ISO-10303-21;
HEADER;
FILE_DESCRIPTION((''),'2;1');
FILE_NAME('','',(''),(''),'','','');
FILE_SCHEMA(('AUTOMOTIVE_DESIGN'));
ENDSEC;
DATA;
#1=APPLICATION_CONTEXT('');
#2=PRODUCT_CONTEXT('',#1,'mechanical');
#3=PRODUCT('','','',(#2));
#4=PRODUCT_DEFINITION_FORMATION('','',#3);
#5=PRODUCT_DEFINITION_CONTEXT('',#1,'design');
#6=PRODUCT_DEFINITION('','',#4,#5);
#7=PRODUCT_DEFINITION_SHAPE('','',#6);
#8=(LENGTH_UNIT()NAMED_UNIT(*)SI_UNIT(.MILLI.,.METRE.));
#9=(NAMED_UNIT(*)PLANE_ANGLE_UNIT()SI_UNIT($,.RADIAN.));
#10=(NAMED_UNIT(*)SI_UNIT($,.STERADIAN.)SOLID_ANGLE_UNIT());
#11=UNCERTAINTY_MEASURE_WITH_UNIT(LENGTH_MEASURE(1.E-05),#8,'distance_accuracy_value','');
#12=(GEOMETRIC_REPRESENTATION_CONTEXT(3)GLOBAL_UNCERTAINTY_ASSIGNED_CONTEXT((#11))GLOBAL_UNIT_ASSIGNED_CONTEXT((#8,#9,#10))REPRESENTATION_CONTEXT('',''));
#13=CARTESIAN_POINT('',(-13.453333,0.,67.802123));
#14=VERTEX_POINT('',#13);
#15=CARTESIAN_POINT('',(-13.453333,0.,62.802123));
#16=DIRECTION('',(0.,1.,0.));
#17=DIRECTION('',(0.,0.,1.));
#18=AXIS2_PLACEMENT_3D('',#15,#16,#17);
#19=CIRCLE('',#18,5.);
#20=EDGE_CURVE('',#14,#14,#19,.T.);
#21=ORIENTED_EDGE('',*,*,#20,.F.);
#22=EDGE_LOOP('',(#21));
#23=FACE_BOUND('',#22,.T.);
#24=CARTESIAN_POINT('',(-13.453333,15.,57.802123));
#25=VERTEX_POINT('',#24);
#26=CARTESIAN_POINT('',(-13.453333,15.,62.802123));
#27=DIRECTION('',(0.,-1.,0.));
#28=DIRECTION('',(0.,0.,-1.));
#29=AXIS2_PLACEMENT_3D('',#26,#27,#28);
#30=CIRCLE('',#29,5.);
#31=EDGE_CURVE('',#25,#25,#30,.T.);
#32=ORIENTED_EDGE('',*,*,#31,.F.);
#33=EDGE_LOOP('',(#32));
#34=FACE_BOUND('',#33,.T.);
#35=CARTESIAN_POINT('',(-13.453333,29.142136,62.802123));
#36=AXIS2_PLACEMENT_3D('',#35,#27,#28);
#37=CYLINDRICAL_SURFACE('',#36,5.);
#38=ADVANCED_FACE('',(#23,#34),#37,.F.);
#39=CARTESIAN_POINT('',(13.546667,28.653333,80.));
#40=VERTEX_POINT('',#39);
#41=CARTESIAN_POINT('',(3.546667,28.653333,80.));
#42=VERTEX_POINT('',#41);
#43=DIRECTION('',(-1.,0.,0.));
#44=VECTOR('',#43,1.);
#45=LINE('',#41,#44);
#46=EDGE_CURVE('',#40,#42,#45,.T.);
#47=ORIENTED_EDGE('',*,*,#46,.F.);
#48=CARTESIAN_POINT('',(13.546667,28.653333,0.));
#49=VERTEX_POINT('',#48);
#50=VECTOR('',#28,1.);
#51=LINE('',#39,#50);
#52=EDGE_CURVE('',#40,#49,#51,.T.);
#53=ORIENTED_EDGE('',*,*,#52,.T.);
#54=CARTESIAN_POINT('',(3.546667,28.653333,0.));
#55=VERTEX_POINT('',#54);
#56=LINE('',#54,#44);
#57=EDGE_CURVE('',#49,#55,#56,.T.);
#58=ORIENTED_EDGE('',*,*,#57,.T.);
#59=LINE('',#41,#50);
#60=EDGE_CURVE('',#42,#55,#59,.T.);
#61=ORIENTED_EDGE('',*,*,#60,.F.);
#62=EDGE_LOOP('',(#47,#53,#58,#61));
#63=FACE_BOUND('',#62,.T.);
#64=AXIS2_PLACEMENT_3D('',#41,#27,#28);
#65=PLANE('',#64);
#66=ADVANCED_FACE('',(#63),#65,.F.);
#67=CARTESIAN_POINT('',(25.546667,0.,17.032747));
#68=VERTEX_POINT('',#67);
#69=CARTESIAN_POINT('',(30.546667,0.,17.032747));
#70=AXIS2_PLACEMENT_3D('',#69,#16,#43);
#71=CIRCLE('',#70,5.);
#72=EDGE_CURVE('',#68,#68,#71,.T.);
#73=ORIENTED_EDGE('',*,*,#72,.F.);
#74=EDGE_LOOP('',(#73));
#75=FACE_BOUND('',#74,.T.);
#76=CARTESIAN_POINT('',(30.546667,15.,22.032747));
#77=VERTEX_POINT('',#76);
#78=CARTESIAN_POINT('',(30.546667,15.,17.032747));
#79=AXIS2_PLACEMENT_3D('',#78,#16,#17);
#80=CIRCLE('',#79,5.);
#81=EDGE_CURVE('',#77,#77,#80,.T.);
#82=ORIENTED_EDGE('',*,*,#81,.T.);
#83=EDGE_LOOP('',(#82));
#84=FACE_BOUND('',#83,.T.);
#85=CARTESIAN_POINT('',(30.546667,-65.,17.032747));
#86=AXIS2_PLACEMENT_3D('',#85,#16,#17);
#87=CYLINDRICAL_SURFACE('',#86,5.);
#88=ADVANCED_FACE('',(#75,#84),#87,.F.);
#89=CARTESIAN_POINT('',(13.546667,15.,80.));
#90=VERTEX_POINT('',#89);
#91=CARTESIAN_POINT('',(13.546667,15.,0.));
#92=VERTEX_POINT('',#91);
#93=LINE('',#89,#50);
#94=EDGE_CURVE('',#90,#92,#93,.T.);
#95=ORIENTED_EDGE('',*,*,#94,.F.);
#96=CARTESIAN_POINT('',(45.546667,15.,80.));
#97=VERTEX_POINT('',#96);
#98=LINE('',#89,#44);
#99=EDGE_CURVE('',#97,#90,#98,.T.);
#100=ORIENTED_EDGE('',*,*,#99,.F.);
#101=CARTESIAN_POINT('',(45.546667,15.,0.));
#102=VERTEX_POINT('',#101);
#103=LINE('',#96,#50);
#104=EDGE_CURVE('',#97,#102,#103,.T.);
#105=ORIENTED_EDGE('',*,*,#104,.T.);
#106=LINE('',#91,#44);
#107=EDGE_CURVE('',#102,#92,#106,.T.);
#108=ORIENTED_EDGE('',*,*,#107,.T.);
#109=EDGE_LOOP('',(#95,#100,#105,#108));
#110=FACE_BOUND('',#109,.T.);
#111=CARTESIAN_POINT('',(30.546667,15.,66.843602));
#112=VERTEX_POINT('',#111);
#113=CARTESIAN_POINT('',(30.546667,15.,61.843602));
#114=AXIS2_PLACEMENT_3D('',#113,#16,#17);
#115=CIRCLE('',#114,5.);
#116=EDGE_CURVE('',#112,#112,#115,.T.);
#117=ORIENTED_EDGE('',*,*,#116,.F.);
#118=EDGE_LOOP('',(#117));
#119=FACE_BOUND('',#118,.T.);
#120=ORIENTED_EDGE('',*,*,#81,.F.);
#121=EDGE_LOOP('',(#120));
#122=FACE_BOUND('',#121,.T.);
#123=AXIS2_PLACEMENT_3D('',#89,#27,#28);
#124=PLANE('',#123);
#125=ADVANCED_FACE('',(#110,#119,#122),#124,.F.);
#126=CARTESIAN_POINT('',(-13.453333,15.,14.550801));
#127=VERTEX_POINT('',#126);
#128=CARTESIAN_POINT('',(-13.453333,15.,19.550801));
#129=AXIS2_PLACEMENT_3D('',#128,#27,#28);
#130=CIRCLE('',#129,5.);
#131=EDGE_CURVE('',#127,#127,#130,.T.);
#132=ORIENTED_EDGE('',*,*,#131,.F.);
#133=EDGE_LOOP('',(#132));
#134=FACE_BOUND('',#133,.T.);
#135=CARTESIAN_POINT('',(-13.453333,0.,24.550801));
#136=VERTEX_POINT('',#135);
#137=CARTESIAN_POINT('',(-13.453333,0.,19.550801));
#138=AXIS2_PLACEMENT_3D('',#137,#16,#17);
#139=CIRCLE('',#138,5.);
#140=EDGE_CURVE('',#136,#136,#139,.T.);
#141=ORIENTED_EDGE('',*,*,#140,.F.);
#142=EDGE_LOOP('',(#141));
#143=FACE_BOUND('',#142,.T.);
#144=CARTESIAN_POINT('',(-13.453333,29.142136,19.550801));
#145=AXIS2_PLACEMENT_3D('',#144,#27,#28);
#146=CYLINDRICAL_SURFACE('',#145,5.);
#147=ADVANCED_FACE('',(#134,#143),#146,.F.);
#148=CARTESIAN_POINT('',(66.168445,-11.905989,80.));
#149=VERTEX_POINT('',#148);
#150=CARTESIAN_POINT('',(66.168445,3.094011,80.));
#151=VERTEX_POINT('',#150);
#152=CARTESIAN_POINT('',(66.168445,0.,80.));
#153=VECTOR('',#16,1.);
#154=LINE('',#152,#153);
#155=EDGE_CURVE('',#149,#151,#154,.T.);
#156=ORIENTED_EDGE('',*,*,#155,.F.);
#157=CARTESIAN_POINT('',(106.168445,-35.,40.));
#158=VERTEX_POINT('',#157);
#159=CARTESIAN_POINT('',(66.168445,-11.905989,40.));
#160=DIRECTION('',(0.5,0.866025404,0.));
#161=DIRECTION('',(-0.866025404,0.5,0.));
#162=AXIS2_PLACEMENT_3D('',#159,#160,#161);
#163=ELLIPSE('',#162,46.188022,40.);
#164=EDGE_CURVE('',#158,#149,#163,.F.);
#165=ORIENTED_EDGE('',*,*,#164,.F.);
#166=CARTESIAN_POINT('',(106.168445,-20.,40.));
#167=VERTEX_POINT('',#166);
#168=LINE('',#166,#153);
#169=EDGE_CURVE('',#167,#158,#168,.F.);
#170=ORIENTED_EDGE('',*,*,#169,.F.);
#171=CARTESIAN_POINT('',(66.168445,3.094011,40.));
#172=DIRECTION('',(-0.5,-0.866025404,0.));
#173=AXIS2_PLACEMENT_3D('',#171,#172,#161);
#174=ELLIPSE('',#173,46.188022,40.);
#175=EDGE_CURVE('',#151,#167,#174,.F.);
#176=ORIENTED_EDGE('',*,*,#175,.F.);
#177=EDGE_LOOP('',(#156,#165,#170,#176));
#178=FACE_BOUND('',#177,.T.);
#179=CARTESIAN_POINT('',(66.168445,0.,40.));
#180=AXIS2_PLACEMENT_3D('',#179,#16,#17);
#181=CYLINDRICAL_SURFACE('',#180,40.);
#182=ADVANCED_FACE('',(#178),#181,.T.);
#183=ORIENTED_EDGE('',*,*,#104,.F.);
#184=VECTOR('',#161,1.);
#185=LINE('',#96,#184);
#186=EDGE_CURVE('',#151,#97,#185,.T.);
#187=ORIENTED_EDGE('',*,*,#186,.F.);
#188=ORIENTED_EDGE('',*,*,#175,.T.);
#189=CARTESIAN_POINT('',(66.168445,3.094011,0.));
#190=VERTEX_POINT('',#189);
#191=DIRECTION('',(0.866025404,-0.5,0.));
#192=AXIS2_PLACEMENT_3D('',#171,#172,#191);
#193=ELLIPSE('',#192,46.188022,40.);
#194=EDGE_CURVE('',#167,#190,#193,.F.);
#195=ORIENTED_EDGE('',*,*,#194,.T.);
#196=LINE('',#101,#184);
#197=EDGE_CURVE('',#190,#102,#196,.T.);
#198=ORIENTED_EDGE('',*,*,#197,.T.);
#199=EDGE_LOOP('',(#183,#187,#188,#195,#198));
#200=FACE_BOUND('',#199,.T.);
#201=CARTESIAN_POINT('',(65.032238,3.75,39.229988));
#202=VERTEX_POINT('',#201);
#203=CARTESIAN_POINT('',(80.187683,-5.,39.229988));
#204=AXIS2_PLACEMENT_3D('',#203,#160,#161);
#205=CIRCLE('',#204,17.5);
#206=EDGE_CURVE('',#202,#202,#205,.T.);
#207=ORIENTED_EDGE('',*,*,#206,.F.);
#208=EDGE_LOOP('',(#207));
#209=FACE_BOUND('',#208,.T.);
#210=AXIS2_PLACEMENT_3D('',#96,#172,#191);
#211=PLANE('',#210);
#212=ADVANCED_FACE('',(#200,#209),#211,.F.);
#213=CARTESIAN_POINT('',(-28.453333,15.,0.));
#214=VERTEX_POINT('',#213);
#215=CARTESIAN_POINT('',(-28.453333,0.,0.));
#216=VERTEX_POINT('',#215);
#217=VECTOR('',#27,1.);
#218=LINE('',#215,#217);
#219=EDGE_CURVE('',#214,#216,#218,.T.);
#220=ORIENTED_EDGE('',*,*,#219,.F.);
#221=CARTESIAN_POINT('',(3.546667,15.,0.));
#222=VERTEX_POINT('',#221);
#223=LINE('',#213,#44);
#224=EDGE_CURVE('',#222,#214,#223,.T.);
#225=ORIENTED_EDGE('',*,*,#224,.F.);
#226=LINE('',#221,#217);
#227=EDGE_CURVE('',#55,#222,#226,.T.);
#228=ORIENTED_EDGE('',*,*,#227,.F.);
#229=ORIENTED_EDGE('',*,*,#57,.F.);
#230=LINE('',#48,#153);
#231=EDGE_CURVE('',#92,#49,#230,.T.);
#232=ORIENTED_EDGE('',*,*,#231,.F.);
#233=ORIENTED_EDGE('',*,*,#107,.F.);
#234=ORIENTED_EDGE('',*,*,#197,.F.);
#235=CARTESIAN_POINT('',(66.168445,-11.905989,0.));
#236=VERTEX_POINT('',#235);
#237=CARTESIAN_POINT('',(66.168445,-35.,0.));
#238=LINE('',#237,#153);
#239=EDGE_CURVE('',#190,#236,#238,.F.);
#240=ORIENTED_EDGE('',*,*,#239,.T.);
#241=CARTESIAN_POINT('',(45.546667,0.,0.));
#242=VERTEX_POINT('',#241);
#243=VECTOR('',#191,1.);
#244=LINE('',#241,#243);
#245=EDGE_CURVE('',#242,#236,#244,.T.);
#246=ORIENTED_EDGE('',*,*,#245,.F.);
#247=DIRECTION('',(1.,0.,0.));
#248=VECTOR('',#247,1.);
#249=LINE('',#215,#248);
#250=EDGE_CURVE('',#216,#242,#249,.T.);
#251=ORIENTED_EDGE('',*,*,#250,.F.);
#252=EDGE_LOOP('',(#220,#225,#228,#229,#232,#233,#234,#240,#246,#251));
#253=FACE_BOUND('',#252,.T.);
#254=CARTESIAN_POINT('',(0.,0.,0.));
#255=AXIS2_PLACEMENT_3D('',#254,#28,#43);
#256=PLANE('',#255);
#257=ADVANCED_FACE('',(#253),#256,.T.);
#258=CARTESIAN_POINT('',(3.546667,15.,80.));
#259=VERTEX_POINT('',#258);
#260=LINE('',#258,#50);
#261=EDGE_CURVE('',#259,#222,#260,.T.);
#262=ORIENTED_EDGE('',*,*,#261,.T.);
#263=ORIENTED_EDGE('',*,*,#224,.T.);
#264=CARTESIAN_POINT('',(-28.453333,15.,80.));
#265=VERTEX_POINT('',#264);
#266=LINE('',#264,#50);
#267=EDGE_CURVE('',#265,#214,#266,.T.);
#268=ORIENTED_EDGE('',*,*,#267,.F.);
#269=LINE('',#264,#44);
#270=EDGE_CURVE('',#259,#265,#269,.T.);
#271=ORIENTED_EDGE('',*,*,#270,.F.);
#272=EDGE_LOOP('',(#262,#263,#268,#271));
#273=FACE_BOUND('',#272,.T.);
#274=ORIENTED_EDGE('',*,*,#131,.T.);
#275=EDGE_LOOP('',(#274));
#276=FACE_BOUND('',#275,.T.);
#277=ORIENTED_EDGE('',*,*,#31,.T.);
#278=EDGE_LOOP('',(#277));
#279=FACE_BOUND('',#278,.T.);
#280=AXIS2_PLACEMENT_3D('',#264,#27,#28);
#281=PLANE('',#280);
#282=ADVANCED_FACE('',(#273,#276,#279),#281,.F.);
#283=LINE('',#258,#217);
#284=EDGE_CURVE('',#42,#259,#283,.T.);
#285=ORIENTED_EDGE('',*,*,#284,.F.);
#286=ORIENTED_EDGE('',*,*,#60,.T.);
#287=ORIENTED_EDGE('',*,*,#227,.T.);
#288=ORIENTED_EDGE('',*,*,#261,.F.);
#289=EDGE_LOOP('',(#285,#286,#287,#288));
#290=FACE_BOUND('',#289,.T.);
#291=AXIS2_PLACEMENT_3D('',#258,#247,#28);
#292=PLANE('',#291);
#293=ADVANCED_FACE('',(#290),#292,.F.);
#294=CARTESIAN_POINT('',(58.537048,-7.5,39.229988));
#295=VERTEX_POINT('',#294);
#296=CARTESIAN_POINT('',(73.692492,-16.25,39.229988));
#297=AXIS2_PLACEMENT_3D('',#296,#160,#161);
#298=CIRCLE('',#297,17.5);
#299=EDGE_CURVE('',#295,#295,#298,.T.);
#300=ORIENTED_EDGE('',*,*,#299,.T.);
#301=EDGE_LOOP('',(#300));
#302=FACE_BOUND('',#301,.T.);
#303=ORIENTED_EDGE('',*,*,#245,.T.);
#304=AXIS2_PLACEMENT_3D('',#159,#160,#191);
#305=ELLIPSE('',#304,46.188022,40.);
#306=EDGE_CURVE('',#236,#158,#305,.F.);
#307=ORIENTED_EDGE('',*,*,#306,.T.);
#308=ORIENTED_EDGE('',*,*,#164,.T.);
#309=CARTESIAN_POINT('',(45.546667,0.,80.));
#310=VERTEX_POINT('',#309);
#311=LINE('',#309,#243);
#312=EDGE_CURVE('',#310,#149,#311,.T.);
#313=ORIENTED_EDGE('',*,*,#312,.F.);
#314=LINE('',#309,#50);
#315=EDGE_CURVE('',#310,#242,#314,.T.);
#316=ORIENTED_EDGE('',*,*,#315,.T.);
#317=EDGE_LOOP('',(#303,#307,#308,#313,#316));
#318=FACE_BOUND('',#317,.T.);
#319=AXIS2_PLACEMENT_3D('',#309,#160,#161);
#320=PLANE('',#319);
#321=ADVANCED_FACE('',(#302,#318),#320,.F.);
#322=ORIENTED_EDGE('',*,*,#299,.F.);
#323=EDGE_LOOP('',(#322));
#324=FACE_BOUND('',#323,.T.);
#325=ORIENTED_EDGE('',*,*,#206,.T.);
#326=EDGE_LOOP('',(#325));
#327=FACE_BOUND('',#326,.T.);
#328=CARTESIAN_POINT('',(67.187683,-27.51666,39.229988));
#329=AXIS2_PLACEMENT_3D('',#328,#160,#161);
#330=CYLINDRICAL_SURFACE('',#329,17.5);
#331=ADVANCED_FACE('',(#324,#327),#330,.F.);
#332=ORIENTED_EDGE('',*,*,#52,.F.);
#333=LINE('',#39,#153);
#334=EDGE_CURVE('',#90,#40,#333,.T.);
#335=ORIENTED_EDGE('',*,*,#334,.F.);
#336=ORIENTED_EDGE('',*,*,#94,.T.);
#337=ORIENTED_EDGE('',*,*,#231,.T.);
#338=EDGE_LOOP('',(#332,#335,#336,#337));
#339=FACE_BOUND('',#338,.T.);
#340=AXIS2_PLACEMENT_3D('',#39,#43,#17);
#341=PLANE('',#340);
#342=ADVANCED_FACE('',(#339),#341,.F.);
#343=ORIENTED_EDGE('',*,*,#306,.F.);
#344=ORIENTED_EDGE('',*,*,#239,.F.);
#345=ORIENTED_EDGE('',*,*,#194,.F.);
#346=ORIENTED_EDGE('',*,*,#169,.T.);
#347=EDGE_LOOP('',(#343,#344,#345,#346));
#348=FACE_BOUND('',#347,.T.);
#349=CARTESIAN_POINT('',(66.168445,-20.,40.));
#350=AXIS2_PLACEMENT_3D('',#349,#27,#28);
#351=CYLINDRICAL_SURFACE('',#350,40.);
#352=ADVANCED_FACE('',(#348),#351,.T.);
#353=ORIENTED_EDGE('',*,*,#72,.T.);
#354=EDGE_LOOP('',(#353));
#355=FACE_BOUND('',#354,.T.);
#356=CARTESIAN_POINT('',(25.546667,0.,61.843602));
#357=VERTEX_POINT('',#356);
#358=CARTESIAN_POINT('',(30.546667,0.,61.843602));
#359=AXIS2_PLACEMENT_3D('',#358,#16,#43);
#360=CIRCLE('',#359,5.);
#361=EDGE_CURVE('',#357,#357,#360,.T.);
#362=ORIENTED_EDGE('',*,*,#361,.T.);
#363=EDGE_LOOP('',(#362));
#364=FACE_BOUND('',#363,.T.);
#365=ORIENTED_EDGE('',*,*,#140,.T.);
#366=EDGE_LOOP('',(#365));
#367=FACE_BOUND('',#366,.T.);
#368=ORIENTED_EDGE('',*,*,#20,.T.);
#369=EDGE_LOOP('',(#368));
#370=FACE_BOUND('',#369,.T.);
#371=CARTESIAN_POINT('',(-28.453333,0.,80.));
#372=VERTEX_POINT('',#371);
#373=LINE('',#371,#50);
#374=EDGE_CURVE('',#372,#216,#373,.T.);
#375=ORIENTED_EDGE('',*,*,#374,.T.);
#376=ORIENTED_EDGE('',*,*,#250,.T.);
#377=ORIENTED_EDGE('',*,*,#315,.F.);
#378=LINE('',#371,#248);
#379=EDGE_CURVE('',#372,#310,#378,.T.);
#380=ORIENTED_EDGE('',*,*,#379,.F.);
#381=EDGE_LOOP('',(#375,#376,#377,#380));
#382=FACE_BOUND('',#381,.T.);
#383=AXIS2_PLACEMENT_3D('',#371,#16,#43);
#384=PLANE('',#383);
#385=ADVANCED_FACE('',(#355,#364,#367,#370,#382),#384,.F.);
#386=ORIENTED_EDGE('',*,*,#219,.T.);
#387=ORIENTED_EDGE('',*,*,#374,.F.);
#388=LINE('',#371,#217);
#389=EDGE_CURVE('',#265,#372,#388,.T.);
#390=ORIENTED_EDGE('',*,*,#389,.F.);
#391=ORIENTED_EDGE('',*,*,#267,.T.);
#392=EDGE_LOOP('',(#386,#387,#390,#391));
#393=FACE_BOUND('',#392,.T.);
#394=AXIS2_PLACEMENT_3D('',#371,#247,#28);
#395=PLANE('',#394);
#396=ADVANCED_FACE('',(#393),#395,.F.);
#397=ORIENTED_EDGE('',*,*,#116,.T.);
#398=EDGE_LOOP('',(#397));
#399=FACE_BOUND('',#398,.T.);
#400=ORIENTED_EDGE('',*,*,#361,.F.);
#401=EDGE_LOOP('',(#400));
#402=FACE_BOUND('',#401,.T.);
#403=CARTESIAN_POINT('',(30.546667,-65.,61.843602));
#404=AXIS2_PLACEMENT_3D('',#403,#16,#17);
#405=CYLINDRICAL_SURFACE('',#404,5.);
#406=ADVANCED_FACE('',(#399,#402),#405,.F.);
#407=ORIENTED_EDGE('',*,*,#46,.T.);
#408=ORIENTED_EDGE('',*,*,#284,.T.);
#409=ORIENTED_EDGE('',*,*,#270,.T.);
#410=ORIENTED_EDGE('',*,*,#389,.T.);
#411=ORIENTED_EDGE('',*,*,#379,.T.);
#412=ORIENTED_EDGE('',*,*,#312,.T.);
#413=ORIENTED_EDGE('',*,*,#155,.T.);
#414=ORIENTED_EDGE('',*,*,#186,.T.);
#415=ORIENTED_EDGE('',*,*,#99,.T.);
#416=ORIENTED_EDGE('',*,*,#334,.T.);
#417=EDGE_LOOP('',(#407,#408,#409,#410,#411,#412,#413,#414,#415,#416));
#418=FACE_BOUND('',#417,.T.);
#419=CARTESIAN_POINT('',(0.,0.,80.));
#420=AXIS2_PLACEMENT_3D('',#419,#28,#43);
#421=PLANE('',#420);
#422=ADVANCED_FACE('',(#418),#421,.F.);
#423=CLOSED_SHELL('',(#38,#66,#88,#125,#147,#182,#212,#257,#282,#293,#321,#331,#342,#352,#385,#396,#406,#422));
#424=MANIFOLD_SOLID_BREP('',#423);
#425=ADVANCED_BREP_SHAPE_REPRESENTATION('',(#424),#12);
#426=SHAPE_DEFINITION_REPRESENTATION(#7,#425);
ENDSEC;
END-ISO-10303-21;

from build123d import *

# Parameters (mm, degrees)
BOSS_EXTRUDE1_DEPTH = 80
FILLET1_R           = 40
SKETCH3_R           = 5
CUT_EXTRUDE3_DEPTH  = 15
SKETCH4_R           = 5
CUT_EXTRUDE4_DEPTH  = 80
SKETCH5_R           = 17.5
CUT_EXTRUDE5_DEPTH  = 26


with BuildPart() as part:
    # Sketch2 → Boss-Extrude1 (new body)
    with BuildSketch(Plane.XY):
        Polygon((-28.453333333, 0), (45.546666667, 0), (106.168444932, -35), (106.168444932, -20), (45.546666667, 15), (13.546666667, 15), (13.546666667, 28.653333333), (3.546666667, 28.653333333), (3.546666667, 15), (-28.453333333, 15), align=None)
    extrude(amount=BOSS_EXTRUDE1_DEPTH)

    # Fillet1
    # the kernel refuses this fillet: 40 mm, written as the material it takes off along each edge
    with BuildSketch(Plane(origin=(106.168444932, -135, 0), x_dir=(0, 0, 1), z_dir=(0, 1, 0))) as fillet1_piece_1:
        with BuildLine():
            CenterArc((FILLET1_R, -FILLET1_R), FILLET1_R, 90, 90)
            Line((0, -FILLET1_R), (0, 0))
            Line((0, 0), (FILLET1_R, 0))
        make_face()
    extrude(amount=215, mode=Mode.SUBTRACT)
    with BuildSketch(Plane(origin=(106.168444932, -135, 80), x_dir=(0, 0, -1), z_dir=(0, 1, 0))) as fillet1_piece_2:
        with BuildLine():
            CenterArc((FILLET1_R, FILLET1_R), FILLET1_R, 180, 90)
            Line((0, FILLET1_R), (0, 0))
            Line((0, 0), (FILLET1_R, 0))
        make_face()
    extrude(amount=215, mode=Mode.SUBTRACT)

    # Sketch3 → Cut-Extrude3 (cut)
    with BuildSketch(Plane(origin=(0, 0, 0), x_dir=(1, 0, 0), z_dir=(0, 1, 0))):
        with Locations(Location((-13.453333333, -19.550801078, 0), (0, 0, 90))):
            Circle(SKETCH3_R)
        with Locations(Location((-13.453333333, -62.802123194, 0), (0, 0, 90))):
            Circle(SKETCH3_R)
    extrude(amount=CUT_EXTRUDE3_DEPTH, mode=Mode.SUBTRACT)

    # Sketch4 → Cut-Extrude4 (cut)
    with BuildSketch(Plane(origin=(0, 15, 0), x_dir=(1, 0, 0), z_dir=(0, 1, 0))):
        with Locations(Location((30.546666667, -17.032746755, 0), (0, 0, 270))):
            Circle(SKETCH4_R)
        with Locations(Location((30.546666667, -61.843602222, 0), (0, 0, 270))):
            Circle(SKETCH4_R)
    extrude(amount=-CUT_EXTRUDE4_DEPTH, mode=Mode.SUBTRACT)

    # Sketch5 → Cut-Extrude5 (cut)
    with BuildSketch(Plane(origin=(17.881857195, 30.972285196, 0), x_dir=(0.866025403784438, -0.5000000000000011, 0), z_dir=(0.5000000000000011, 0.8660254037844382, 0))):
        with Locations(Location((71.944570391, -39.229988433, 0), (0, 0, 180))):
            Circle(SKETCH5_R)
    extrude(amount=-CUT_EXTRUDE5_DEPTH, mode=Mode.SUBTRACT)


solid = part.part
